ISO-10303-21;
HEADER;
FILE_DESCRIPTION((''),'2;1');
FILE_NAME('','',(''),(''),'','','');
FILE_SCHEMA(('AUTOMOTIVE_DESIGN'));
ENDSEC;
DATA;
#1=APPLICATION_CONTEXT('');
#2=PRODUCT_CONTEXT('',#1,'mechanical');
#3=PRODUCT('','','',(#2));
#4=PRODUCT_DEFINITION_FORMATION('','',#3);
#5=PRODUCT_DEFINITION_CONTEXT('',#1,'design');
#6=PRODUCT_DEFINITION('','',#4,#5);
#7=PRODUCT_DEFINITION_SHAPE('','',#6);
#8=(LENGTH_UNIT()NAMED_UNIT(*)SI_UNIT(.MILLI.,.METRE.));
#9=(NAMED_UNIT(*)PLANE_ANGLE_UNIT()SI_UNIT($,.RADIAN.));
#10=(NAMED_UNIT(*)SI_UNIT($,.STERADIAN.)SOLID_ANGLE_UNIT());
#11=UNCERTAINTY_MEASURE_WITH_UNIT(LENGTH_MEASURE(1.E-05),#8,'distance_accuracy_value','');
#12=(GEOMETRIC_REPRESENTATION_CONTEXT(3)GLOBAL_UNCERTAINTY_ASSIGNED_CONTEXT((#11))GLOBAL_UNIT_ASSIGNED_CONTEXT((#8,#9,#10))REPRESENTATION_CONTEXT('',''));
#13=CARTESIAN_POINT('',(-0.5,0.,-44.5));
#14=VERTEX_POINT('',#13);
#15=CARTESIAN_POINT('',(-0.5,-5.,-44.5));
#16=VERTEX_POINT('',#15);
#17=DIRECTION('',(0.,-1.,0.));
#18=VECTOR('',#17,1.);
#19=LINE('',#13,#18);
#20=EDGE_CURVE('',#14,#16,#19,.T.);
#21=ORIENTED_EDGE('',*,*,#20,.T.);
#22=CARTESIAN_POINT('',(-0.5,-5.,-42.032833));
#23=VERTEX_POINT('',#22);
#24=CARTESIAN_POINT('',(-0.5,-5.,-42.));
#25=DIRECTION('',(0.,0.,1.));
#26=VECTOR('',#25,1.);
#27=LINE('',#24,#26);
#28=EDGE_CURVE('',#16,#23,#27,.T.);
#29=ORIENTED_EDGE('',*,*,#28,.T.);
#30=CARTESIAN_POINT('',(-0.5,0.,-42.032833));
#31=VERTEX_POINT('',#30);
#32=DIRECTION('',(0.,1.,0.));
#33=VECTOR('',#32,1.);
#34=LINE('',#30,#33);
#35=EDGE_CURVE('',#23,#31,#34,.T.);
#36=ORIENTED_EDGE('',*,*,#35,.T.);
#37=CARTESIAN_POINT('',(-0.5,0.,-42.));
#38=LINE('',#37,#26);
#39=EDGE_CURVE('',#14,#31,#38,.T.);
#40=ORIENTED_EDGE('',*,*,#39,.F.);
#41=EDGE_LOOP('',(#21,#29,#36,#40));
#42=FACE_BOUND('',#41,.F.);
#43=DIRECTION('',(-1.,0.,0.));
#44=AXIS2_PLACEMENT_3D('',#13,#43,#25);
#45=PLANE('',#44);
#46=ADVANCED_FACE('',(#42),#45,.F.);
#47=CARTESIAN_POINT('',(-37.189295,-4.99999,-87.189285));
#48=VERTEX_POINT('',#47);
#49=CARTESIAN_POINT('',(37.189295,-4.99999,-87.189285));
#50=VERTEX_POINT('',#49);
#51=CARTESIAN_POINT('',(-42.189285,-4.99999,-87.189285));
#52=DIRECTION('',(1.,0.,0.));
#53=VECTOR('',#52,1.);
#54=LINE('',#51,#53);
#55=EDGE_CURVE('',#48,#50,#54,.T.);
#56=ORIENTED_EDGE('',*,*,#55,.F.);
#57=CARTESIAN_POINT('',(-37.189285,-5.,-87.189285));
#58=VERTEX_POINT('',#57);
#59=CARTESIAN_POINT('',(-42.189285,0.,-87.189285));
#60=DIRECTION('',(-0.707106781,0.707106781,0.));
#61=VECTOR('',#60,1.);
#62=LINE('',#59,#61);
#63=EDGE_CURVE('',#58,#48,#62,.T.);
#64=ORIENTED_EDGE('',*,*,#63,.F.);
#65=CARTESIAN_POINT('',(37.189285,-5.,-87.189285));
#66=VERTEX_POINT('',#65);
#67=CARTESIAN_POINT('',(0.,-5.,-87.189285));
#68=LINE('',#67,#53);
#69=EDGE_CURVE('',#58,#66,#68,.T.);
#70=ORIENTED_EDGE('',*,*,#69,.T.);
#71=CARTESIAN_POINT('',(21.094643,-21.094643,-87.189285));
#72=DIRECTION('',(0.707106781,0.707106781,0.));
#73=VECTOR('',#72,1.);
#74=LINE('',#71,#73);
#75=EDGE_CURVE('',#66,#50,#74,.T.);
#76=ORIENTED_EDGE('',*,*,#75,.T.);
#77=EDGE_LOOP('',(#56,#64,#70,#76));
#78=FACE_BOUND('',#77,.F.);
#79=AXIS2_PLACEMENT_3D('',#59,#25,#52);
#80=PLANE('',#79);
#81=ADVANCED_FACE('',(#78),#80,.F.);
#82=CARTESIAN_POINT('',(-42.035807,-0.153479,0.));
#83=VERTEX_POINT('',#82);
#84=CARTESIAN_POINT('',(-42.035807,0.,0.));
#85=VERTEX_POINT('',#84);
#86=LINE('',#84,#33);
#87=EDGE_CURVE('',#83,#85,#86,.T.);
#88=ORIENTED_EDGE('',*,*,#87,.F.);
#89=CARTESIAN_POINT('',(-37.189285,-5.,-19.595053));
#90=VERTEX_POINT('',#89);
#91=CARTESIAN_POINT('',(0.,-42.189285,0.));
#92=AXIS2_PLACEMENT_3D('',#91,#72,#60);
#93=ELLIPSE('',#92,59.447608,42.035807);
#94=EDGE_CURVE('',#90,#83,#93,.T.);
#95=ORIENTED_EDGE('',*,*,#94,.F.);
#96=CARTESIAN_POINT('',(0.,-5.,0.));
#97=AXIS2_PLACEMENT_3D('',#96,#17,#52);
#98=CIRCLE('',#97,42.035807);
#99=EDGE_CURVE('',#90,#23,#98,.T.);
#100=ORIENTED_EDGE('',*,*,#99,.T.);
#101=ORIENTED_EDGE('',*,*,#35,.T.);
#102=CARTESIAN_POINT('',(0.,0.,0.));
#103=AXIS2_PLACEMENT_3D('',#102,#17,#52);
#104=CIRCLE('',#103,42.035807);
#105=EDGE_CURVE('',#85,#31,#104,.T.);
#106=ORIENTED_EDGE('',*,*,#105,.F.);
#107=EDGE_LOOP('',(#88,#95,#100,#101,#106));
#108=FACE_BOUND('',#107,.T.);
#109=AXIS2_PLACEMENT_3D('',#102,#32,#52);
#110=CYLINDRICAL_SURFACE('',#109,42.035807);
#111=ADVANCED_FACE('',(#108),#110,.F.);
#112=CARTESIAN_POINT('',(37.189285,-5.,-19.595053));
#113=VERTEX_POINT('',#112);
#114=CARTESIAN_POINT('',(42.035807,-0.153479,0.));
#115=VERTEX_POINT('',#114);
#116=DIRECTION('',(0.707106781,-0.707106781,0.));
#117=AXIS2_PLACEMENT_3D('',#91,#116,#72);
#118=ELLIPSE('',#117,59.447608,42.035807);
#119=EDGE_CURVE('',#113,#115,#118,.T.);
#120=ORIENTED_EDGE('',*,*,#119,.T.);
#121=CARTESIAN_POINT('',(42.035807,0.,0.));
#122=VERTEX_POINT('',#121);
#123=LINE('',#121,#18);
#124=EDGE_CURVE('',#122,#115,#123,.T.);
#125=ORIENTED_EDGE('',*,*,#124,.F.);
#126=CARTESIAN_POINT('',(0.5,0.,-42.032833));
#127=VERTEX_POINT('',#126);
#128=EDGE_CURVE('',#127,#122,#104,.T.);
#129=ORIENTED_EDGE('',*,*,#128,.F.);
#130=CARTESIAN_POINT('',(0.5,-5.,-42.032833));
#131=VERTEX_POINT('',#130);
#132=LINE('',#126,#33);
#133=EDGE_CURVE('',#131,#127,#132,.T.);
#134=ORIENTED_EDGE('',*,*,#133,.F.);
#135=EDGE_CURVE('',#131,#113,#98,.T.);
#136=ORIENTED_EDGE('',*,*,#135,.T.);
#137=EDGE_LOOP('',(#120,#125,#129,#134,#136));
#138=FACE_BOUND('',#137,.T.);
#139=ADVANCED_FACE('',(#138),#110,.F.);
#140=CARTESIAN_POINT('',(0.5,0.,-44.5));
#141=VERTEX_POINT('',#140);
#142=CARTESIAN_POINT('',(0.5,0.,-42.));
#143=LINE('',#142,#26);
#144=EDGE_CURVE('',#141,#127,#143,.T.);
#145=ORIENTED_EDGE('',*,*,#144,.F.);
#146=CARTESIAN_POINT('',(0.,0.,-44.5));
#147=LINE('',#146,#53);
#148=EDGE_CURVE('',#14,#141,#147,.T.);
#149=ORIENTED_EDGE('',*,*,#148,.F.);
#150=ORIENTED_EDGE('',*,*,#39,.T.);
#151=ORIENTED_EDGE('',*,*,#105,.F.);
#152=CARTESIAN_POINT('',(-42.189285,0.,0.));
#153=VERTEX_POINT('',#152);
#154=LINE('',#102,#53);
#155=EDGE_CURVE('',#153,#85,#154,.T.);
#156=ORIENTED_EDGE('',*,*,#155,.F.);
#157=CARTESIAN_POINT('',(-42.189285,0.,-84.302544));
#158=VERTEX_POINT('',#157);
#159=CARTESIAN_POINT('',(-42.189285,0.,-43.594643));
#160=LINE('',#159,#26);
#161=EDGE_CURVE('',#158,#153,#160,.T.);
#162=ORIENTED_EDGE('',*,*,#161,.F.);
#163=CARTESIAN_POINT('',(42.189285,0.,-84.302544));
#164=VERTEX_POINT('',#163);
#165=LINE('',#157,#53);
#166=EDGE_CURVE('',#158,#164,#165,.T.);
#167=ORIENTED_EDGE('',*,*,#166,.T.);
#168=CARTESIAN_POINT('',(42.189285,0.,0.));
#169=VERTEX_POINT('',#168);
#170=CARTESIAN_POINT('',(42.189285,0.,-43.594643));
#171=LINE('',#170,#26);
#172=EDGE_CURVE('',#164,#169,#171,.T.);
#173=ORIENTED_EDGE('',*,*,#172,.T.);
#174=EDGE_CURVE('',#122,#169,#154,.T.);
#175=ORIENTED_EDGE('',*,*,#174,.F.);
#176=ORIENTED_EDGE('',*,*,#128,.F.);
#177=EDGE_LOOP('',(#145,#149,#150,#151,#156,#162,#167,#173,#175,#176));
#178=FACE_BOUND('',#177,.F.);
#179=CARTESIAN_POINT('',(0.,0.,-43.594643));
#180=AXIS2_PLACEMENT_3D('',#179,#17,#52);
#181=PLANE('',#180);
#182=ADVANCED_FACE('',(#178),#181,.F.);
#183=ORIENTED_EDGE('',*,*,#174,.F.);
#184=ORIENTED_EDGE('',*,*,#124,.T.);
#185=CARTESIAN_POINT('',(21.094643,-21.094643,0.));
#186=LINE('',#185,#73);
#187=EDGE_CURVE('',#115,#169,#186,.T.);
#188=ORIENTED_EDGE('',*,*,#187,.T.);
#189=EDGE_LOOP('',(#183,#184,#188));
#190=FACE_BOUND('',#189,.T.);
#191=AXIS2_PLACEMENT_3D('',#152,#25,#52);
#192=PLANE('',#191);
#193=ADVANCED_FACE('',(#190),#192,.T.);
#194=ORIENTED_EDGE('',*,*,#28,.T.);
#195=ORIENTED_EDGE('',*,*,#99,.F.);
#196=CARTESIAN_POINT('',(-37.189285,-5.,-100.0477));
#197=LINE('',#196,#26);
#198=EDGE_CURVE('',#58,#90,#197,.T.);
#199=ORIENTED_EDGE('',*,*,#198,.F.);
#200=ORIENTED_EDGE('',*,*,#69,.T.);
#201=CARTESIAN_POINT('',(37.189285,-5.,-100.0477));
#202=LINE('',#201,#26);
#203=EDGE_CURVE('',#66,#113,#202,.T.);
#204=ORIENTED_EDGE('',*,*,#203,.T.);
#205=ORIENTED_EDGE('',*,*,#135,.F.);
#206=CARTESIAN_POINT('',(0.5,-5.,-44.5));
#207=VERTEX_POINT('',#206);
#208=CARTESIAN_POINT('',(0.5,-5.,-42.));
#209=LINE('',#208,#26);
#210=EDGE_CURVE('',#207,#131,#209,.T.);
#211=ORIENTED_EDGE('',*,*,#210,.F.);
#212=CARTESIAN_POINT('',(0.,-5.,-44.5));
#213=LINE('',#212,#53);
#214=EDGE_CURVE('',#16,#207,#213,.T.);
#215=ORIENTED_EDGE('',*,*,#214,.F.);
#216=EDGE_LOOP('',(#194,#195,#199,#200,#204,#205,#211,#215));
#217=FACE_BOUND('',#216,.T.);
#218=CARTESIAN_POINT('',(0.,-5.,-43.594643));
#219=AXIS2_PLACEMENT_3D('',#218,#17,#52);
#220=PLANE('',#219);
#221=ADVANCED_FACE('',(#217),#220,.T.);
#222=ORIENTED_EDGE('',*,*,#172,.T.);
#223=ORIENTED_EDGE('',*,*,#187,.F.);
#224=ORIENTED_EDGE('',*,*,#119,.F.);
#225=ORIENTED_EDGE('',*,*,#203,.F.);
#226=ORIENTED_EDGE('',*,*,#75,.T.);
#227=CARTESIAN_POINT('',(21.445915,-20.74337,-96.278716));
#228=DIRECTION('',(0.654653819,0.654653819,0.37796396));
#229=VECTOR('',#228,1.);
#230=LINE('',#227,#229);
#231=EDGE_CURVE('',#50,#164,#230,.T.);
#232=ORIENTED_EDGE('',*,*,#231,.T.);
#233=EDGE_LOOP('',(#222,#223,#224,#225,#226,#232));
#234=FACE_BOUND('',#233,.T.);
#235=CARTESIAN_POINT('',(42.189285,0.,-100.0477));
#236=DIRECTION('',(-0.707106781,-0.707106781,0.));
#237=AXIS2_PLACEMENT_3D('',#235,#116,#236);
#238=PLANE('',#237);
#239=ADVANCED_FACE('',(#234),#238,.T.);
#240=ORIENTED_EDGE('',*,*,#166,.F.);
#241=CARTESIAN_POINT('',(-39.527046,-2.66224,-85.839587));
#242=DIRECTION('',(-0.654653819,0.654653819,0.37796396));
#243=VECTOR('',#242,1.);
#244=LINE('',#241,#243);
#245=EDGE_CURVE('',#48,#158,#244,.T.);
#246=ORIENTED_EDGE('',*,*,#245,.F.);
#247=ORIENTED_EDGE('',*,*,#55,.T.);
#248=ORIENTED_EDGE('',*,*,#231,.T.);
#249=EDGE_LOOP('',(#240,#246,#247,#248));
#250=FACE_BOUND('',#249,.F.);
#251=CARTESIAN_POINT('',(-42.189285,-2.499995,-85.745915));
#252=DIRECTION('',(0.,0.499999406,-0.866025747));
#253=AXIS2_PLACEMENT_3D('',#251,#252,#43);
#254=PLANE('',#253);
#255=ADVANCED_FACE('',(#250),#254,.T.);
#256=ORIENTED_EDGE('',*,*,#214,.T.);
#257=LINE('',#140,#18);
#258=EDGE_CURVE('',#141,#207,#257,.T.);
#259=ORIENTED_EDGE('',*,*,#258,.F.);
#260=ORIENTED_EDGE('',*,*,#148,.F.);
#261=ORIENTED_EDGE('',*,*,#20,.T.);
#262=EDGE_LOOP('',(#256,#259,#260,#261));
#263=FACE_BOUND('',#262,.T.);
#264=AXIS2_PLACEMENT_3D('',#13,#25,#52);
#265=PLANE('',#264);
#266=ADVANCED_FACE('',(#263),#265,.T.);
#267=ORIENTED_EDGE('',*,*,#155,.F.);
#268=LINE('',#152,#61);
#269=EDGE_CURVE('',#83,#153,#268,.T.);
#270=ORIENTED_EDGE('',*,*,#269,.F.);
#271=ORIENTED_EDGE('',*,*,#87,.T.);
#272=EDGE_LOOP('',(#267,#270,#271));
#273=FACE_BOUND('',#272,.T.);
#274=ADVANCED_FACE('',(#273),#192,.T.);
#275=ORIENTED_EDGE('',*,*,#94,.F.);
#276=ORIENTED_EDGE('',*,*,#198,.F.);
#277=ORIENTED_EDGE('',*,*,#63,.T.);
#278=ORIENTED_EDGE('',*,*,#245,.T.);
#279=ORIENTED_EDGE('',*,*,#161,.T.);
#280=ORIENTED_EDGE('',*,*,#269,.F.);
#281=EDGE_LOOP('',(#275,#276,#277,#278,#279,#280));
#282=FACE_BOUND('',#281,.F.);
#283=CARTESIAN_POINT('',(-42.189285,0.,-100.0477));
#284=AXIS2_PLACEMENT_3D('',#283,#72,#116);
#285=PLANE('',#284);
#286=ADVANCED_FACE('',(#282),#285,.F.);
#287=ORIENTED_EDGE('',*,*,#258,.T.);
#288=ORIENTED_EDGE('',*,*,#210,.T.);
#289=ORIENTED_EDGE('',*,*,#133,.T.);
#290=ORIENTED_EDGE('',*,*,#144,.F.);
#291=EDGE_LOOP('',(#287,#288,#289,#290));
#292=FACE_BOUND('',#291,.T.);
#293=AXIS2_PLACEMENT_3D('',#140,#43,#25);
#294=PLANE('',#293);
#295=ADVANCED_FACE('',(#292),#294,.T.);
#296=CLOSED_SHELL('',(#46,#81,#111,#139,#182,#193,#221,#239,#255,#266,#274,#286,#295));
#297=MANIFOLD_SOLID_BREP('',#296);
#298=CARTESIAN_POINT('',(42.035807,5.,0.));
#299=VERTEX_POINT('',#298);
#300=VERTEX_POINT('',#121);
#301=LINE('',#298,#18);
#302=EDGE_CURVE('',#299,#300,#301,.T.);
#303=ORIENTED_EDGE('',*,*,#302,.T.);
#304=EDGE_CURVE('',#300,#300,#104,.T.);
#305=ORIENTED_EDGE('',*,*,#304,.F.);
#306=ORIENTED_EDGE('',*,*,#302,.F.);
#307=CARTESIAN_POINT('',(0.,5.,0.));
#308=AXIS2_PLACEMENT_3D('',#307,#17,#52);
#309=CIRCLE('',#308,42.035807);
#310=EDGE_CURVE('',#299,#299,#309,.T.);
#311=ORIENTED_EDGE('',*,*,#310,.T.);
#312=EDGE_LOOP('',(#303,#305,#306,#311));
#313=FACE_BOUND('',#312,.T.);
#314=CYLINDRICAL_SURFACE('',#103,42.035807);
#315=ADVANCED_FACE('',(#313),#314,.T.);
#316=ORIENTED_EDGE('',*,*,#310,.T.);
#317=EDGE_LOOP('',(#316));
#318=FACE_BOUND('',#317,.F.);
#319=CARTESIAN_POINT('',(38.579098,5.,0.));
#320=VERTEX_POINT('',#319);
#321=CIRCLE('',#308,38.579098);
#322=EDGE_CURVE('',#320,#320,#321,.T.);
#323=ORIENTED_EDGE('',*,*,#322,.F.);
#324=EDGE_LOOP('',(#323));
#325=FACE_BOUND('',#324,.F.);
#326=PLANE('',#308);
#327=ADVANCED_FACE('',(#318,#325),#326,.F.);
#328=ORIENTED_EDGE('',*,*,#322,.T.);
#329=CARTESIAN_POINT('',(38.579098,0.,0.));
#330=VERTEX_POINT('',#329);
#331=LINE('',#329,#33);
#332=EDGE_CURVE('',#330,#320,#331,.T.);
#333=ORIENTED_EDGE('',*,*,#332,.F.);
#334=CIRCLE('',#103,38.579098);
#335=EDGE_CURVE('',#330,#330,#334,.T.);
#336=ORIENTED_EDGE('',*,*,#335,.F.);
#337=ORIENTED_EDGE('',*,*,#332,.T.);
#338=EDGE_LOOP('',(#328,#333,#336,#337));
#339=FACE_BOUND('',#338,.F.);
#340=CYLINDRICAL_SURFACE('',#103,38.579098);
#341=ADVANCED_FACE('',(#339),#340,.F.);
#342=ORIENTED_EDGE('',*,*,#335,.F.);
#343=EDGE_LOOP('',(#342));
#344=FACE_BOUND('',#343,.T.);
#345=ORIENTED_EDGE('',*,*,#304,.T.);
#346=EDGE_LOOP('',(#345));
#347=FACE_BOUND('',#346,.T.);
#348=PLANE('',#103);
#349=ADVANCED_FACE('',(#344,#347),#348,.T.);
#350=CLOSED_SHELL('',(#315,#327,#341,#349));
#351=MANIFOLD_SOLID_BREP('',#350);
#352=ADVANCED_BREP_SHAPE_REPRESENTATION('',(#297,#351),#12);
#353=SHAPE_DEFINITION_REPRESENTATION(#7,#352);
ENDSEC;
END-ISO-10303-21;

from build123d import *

# Parameters (mm, degrees)
F1_R         = 42.0358065459
F3_DEPTH     = 5
F2_R         = 38.5790977184
F4_DEPTH     = 5
F0_R         = 2
F5_DEPTH     = 25
F6_W         = 84.3785708158
F6_H         = 87.1892854079
F6_W_2       = 1
F6_H_2       = 5
F7_DEPTH     = 5
F8_DEPTH     = 5
F9_SIZE2     = 2.886741
F9_SIZE      = 4.99999
F10_T1_DEPTH = 112.9061152876


# Not quite as in the source:
# - a fillet or chamfer that OpenCascade refuses, or shapes differently, is made with other operations: its cross-section is extruded or revolved along the edge and cut away or added
# - a fillet or chamfer is up to 0.001 mm smaller than in the source, because OpenCascade refuses the exact size


with BuildPart() as f3:
    # F1 (on Front) → F3 (new body, symmetric)
    with BuildSketch(Plane.XZ):
        Circle(F1_R)
    extrude(amount=F3_DEPTH, both=True)

    # F2 (on Front) → F4 (cut)
    with BuildSketch(Plane.XZ):
        Circle(F2_R)
    extrude(amount=-F4_DEPTH, mode=Mode.SUBTRACT)

    # F0 (on Front) → F5 (cut)
    with BuildSketch(Plane.XZ):
        with BuildLine():
            ThreePointArc((26, 24), (24, 26), (22, 24))
            ThreePointArc((22, 24), (24, 22), (26, 24))
        make_face()
        with BuildLine():
            ThreePointArc((12.5, 24), (0, 27.0601182555), (-12.5, 24))
            Line((-12.5, 24), (12.5, 24))
        make_face()
        with BuildLine():
            Line((12.5, 24), (-12.5, 24))
            ThreePointArc((-12.5, 24), (-27.0601182555, 0), (-12.5, -24))
            Line((-12.5, -24), (12.5, -24))
            ThreePointArc((12.5, -24), (23.1354865757, -14.0356425184), (27.0601182555, 0))
            ThreePointArc((27.0601182555, 0), (23.1354865757, 14.0356425184), (12.5, 24))
        make_face()
        with Locations((-24, 24)):
            Circle(F0_R)
        with BuildLine():
            ThreePointArc((12.5, -24), (0, -27.0601182555), (-12.5, -24))
            Line((-12.5, -24), (-12.5, -28))
            Line((-12.5, -28), (12.5, -28))
            Line((12.5, -28), (12.5, -24))
        make_face()
        with BuildLine():
            Line((12.5, -24), (-12.5, -24))
            ThreePointArc((-12.5, -24), (0, -27.0601182555), (12.5, -24))
        make_face()
        with Locations((24, -24)):
            Circle(F0_R)
        with Locations((-24, -24)):
            Circle(F0_R)
    extrude(amount=F5_DEPTH, mode=Mode.SUBTRACT)


with BuildPart() as f7:
    # F6 (on Front) → F7 (new body)
    with BuildSketch(Plane.XZ):
        with Locations((0, -43.5946427039)):
            Rectangle(F6_W, F6_H)
        with Locations((0, -42)):
            Rectangle(F6_W_2, F6_H_2, mode=Mode.SUBTRACT)
    extrude(amount=F7_DEPTH)


with BuildPart() as f8_tool:
    # F1 (on Front) → F8 (new body)
    with BuildSketch(Plane.XZ):
        Circle(F1_R)
    extrude(amount=F8_DEPTH)


with BuildPart() as f3_1:
    add(f3.part)

    # F8: cut by f8_tool
    add(f8_tool.part, mode=Mode.SUBTRACT)


with BuildPart() as f7_1:
    add(f7.part)

    # F8: cut by f8_tool
    add(f8_tool.part, mode=Mode.SUBTRACT)

    # F9 (size 5 and 2.8867513459 in the source; OpenCascade refuses exactly that, so slightly less here)
    f9_edges = [f7_1.edges().sort_by_distance(p)[0] for p in [
        (0, 0, -87.189285),
    ]]
    f9_side = f7_1.faces().sort_by_distance((0, -2.5, -87.189285))[0]
    chamfer(f9_edges, length=F9_SIZE, length2=F9_SIZE2, reference=f9_side)

    # F10: chamfer of 5 on 2 edges, made by hand

    # F10_s2 → F10_t1 (cut)
    with BuildSketch(Plane.XY.offset(-100.0477003477)):
        Polygon((-42.1892854079, 0), (-37.1892854079, -5), (-42.1892854079, -5), align=None)
        Polygon((42.1892854079, 0), (37.1892854079, -5), (42.1892854079, -5), align=None)
    extrude(amount=F10_T1_DEPTH, mode=Mode.SUBTRACT)


solid = Compound([f3_1.part, f7_1.part])
